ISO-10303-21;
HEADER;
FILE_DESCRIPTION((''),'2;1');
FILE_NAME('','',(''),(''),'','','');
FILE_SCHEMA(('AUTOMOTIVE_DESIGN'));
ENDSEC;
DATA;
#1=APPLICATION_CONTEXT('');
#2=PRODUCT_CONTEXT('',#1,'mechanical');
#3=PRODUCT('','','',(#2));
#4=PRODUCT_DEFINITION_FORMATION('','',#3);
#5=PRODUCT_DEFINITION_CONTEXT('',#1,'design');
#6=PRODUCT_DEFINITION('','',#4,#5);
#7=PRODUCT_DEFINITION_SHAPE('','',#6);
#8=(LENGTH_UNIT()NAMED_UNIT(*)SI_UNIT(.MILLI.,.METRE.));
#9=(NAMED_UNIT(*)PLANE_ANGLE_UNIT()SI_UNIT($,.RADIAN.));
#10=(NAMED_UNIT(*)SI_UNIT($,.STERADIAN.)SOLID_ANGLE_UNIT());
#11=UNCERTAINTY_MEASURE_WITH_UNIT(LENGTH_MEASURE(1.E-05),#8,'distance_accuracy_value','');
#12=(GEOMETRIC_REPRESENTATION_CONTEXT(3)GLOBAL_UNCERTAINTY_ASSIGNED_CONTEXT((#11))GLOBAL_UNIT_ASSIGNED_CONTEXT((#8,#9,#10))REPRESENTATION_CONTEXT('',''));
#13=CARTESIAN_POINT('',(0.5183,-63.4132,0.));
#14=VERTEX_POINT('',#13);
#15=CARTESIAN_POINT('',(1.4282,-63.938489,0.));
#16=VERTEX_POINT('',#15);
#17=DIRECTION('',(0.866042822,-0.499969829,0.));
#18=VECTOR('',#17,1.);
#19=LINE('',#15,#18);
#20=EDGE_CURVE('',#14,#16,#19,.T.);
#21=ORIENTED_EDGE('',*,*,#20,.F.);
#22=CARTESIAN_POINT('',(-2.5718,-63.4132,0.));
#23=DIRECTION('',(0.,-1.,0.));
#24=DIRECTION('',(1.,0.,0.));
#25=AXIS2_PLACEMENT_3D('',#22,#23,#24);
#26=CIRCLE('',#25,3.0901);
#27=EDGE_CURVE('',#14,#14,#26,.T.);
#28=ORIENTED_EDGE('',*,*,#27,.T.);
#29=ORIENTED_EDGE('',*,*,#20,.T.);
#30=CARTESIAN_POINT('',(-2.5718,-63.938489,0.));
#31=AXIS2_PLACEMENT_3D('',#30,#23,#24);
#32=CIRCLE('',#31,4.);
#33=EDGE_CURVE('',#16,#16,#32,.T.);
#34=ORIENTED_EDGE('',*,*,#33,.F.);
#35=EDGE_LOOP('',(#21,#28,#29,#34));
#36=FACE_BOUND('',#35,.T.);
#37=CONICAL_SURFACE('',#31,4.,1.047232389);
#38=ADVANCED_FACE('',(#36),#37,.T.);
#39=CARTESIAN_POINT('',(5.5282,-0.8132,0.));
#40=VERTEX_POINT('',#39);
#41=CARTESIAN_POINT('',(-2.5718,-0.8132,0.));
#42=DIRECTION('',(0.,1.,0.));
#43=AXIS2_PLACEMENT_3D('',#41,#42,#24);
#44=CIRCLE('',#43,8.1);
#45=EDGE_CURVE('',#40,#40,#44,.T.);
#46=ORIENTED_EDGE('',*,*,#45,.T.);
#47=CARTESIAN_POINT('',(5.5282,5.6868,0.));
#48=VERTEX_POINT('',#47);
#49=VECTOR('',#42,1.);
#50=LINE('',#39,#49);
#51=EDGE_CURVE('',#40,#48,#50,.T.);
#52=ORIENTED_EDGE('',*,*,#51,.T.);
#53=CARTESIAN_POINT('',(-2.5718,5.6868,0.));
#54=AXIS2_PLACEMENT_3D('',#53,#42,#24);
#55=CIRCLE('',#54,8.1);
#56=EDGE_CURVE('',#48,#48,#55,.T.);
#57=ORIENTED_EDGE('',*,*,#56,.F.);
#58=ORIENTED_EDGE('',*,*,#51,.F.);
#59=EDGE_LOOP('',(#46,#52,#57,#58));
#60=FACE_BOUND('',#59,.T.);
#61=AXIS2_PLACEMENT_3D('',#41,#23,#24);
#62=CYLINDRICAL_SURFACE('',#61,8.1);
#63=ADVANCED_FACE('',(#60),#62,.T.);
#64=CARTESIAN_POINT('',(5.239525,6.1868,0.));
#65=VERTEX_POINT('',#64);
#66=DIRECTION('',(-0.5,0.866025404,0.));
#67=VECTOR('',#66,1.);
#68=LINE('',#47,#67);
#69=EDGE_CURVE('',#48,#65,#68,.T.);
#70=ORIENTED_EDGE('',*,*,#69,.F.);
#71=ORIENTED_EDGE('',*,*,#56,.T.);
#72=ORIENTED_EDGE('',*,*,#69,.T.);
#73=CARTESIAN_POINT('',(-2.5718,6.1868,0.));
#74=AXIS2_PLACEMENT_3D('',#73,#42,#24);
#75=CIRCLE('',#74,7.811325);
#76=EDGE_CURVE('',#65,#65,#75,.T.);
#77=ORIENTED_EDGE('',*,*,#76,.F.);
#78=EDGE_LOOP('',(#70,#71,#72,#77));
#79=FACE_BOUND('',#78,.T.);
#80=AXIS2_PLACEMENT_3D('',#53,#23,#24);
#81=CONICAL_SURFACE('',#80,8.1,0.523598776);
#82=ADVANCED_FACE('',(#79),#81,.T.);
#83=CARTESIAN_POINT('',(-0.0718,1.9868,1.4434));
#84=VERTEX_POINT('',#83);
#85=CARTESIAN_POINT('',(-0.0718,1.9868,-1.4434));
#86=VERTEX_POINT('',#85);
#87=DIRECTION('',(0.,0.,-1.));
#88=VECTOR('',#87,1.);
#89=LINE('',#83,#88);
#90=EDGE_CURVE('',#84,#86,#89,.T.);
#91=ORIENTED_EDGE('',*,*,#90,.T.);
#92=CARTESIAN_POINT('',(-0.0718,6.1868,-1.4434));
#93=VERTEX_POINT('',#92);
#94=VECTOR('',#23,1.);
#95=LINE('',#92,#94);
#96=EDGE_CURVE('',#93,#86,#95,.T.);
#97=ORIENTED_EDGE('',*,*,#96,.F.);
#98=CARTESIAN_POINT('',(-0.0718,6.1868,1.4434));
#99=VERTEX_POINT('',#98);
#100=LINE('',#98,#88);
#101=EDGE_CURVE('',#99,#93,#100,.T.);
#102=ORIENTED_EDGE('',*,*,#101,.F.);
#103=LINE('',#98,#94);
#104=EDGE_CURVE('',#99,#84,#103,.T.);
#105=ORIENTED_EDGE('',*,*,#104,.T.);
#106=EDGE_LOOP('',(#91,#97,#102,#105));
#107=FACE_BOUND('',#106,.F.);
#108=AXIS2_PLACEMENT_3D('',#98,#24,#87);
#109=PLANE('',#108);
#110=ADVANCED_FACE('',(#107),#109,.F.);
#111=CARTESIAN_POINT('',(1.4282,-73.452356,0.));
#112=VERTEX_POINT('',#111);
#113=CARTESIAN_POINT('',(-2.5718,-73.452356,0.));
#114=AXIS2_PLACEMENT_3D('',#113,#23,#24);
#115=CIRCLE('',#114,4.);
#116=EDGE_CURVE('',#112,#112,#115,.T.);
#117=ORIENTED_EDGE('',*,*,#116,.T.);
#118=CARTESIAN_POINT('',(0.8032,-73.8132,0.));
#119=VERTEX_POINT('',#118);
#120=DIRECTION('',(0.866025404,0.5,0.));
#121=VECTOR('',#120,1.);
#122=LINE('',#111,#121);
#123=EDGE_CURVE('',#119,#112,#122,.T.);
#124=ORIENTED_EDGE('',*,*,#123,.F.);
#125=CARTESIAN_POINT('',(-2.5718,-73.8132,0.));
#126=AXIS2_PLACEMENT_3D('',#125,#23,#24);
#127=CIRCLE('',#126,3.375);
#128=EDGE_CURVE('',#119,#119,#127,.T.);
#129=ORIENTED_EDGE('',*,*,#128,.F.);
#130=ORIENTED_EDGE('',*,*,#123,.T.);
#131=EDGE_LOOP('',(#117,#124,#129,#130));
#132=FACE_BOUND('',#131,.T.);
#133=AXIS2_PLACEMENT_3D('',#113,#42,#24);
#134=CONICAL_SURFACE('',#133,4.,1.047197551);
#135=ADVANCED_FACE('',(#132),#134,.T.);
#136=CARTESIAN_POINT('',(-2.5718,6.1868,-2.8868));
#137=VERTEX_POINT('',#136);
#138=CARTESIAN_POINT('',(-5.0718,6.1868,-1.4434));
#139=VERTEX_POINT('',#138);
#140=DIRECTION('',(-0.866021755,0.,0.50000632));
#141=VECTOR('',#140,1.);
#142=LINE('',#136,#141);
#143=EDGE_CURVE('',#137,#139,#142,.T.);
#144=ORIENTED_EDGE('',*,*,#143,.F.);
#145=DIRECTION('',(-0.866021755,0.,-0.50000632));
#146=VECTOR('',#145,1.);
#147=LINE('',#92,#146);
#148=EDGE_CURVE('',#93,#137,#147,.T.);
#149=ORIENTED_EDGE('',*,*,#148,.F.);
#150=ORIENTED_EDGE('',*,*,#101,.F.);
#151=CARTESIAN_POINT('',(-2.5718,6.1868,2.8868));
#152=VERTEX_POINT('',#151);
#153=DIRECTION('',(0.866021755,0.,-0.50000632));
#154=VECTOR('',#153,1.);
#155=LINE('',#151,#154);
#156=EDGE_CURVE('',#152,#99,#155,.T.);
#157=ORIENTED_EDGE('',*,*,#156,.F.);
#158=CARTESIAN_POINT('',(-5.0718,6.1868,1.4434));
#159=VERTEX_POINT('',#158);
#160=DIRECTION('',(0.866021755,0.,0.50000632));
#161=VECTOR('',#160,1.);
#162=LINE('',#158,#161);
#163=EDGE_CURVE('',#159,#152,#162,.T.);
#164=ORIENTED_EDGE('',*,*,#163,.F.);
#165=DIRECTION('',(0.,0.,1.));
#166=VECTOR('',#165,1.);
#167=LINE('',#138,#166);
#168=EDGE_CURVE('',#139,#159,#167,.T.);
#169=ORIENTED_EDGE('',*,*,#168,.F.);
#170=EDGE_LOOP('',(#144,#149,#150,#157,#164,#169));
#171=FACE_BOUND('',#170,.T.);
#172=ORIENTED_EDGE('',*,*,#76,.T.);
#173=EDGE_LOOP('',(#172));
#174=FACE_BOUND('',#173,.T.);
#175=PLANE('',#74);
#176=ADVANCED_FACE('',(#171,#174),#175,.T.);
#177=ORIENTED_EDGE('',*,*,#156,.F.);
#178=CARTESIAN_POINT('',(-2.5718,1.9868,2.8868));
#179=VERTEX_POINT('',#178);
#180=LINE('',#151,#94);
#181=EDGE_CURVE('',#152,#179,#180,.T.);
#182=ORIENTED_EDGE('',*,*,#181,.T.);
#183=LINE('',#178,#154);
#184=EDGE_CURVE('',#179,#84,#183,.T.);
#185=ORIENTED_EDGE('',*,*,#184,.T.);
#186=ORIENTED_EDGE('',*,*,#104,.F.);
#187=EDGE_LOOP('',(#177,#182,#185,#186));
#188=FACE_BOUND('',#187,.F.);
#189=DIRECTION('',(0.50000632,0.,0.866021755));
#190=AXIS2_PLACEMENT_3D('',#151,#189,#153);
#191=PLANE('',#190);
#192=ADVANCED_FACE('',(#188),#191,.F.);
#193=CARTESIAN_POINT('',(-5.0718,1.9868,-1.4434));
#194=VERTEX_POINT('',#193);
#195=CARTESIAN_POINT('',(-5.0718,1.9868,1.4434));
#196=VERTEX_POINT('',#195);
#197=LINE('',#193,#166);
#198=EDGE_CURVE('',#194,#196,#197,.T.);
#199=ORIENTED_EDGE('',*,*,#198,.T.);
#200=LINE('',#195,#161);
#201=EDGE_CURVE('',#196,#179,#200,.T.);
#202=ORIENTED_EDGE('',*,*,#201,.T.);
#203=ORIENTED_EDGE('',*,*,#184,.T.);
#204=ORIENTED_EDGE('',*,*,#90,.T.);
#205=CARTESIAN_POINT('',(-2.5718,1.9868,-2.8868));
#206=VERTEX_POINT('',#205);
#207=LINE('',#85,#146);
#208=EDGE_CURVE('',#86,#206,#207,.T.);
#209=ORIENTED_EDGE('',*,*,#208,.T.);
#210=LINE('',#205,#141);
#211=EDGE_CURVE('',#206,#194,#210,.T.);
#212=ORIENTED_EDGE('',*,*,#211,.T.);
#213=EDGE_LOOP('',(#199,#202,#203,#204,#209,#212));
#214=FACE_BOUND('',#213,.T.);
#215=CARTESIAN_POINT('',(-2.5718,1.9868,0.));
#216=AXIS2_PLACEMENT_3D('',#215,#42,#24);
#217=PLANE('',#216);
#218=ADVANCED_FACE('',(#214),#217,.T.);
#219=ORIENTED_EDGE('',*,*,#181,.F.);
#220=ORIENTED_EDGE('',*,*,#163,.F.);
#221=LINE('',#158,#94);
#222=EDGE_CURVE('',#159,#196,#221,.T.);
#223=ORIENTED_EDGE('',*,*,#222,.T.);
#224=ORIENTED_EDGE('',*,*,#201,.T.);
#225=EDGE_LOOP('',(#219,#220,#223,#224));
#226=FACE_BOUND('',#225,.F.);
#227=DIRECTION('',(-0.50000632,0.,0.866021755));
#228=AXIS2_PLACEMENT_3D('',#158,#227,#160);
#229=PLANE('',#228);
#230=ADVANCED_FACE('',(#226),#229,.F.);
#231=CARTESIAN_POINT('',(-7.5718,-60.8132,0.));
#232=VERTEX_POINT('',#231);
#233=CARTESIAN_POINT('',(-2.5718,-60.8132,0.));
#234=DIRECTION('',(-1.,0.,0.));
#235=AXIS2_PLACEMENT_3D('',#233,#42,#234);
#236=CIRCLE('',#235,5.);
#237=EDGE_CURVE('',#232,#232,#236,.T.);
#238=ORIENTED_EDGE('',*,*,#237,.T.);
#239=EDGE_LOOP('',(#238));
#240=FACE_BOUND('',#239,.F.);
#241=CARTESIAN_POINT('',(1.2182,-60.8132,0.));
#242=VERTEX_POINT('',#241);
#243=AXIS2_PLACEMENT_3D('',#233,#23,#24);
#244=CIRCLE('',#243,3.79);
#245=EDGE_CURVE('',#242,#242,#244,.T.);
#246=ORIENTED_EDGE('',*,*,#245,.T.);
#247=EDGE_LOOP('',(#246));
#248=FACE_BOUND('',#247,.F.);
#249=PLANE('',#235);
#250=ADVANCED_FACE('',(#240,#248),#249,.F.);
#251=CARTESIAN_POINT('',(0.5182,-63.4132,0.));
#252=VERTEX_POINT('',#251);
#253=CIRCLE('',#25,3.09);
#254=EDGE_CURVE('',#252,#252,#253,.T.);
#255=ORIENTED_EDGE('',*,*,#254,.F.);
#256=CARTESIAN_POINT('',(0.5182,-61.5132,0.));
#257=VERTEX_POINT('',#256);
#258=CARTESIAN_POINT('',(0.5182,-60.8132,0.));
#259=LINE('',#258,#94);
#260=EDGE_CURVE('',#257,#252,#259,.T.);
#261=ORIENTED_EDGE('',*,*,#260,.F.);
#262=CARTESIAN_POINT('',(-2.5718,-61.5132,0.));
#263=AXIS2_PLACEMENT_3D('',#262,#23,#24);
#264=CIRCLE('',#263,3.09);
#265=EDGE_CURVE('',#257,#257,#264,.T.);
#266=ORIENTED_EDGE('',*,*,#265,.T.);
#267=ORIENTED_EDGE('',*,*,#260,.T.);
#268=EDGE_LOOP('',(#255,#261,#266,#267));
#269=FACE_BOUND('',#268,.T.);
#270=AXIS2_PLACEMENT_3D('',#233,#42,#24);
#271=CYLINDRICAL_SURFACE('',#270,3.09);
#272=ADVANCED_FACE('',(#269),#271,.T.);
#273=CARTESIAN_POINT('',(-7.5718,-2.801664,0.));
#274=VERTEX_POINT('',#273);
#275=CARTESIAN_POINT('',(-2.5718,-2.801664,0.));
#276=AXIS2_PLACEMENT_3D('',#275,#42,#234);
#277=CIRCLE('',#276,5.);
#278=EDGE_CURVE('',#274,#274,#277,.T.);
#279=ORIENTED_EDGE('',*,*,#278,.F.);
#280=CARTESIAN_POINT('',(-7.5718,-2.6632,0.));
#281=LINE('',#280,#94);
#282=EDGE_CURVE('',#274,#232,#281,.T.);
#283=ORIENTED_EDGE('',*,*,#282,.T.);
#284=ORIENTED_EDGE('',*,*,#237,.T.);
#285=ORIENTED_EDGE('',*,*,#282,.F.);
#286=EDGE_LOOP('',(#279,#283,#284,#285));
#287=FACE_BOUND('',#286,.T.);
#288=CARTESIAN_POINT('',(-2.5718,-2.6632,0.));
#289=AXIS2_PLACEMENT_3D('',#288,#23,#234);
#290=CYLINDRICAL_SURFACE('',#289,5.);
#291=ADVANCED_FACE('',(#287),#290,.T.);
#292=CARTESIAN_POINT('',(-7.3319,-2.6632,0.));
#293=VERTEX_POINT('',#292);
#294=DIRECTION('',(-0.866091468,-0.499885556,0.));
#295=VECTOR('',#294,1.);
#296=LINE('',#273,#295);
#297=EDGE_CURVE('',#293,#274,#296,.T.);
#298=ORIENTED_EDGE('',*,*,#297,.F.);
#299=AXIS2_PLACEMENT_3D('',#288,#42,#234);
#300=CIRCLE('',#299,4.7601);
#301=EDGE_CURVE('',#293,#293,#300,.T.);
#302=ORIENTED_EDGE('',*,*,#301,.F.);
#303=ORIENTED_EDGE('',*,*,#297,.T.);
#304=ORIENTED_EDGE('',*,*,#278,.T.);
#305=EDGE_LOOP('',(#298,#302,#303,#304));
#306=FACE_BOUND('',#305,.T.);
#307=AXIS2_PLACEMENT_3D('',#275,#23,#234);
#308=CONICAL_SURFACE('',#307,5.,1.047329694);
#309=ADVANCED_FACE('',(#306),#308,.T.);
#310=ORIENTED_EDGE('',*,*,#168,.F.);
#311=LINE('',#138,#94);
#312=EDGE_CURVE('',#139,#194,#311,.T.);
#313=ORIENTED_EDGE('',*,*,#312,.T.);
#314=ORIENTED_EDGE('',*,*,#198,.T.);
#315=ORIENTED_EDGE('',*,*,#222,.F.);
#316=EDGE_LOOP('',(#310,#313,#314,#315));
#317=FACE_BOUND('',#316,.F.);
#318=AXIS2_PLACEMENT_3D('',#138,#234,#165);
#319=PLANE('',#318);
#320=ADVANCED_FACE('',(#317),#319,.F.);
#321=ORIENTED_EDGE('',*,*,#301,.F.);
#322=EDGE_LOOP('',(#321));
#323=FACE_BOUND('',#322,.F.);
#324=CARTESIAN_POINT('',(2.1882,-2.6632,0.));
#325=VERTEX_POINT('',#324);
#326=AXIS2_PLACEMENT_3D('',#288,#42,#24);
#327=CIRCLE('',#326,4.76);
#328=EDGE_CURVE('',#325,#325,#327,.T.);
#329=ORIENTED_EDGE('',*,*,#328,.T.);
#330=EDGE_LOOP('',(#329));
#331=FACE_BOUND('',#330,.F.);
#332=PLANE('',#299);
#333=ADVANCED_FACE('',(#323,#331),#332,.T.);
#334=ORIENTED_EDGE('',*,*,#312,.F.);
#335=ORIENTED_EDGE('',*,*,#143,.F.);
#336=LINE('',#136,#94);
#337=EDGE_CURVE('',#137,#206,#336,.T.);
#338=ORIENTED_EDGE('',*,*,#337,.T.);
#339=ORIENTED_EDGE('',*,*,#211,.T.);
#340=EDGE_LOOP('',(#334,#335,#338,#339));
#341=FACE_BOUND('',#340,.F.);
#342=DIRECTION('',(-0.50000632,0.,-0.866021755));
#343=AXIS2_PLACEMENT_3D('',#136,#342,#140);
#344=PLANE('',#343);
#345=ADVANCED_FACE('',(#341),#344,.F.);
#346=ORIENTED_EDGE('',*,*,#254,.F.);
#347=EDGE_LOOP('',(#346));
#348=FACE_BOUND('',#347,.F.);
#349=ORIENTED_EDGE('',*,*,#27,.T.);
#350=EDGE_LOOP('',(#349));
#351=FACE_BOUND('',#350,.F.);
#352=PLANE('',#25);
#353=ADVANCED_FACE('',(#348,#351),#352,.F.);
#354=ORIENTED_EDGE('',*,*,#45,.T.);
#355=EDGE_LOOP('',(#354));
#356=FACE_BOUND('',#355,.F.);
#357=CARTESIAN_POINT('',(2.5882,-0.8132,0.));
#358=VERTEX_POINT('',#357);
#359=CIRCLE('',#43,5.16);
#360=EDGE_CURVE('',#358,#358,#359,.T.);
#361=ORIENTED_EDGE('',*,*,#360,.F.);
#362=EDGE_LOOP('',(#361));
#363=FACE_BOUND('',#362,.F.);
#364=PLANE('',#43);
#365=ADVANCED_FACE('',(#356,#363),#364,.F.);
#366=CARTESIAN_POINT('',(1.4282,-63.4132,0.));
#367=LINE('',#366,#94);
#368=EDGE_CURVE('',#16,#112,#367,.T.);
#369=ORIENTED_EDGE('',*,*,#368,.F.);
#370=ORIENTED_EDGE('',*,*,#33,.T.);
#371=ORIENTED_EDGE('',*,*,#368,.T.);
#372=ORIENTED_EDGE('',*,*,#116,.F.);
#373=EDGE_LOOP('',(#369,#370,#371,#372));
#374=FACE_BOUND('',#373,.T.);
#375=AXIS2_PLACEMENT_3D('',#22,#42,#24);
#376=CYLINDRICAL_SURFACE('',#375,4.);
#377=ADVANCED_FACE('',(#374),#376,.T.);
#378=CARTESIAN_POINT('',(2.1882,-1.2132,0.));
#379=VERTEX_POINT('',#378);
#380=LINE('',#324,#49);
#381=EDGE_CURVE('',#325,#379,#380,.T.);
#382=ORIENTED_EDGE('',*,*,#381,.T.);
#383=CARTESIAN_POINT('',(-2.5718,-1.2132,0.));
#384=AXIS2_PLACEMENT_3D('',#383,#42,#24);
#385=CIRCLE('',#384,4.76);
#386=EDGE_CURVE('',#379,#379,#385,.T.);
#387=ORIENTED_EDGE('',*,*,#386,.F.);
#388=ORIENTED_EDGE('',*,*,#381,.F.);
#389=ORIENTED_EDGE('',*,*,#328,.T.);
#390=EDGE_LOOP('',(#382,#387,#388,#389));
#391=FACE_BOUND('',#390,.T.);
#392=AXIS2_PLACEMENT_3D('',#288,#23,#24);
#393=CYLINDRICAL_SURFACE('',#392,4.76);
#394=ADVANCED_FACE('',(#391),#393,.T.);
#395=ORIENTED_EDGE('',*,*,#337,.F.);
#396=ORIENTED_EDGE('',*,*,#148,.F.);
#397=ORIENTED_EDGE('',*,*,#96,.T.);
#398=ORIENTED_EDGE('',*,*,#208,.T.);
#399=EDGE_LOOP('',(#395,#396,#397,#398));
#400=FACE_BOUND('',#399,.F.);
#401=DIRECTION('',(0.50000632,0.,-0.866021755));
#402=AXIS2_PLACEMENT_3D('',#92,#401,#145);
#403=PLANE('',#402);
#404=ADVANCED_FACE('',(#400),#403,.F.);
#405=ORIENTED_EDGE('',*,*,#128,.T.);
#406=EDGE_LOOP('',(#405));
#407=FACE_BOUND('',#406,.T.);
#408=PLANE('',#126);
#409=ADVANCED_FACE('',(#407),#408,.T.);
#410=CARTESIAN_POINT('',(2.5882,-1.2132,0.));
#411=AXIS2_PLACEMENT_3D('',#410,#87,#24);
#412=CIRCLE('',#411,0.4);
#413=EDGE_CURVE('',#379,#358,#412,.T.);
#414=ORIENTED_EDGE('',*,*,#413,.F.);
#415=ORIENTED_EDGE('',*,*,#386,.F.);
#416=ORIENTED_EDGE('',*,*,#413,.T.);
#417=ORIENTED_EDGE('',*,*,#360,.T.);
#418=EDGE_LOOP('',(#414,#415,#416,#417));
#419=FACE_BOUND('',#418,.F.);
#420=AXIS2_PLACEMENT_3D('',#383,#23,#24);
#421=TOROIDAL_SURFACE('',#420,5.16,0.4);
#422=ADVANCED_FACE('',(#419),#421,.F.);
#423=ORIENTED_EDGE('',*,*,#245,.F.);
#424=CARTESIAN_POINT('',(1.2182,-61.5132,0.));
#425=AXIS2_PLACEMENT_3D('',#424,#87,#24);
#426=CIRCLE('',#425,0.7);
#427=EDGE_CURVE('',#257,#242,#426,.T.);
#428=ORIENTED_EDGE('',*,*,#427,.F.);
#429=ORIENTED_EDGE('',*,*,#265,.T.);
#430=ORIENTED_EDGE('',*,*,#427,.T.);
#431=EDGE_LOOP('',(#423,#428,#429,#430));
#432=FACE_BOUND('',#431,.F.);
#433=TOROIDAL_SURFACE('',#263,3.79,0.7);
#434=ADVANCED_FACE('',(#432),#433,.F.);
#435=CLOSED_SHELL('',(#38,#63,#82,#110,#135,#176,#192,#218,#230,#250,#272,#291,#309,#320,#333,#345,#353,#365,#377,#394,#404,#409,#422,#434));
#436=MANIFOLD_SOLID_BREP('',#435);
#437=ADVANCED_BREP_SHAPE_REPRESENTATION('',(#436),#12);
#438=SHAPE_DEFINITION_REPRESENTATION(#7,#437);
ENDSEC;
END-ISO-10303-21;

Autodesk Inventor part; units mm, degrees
ref_plane "YZ Plane" through (0, 0, 0) normal (1, 0, 0) x (0, 1, 0)
ref_plane "XZ Plane" through (0, 0, 0) normal (0, 1, 0) x (-1, 0, 0)
ref_plane "XY Plane" through (0, 0, 0) normal (0, 0, 1) x (1, 0, 0)
sketch "Sketch1" plane through (0, 0, 0) normal (0, 0, 1) x (1, 0, 0)
  line L0 (-2.5718, -2.6632) -> (-7.5718, -2.6632)
  line L1 (-7.5718, -2.6632) -> (-7.5718, -60.8132)
  line L2 (-7.5718, -60.8132) -> (-2.5718, -60.8132)
  line L3 (-2.5718, -60.8132) -> (-2.5718, -2.6632)
  dimension "d1" = 58.15
  dimension "d2" = 5
revolve "Shoulder" add sketch "Sketch1" angle 360 about axis through (-2.5718, -60.8132, 0) along (0, 1, 0)
sketch "Sketch2" plane through (-2.5718, -2.6632, 0) normal (0, 1, 0) x (1, 0, 0)
  circle A0 centre (0, 0) radius 5 projected
  circle A1 centre (0, 0) radius 4.76
  dimension "d3" = 9.52
extrude "Shoulder_neck" add sketch "Sketch2" along normal blind 1.85 contours A1
sketch "Sketch3" plane through (-2.5718, -0.8132, 0) normal (0, 1, 0) x (1, 0, 0)
  circle A0 centre (0, 0) radius 4.76 projected
  circle A1 centre (0, 0) radius 8.1
  dimension "d6" = 16.2
extrude "Head" add sketch "Sketch3" along normal blind 7 contours A0 | A1
sketch "Sketch4" plane through (-2.5718, -60.8132, 0) normal (0, -1, 0) x (1, 0, 0)
  circle A0 centre (0, 0) radius 5 projected
  circle A1 centre (0, 0) radius 3.09
  dimension "d9" = 6.18
extrude "Thread_neck" add sketch "Sketch4" along normal blind 2.6 contours A1
sketch "Sketch5" plane through (-2.5718, -63.4132, 0) normal (0, -1, 0) x (1, 0, 0)
  circle A0 centre (0, 0) radius 3.09 projected
  circle A1 centre (0, 0) radius 4
  dimension "d12" = 8
extrude "Thread_shoulder" add sketch "Sketch5" along normal blind 10.4 contours A0 | A1
sketch "Sketch6" plane through (-2.5718, 6.1868, 0) normal (0, 1, 0) x (1, 0, 0)
  circle A0 centre (0, 0) radius 8.1 projected
  circle A1 centre (0, 0) radius 2.5 construction
  line L0 (-2.5, 1.4434) -> (-2.5, -1.4434)
  line L1 (-2.5, -1.4434) -> (0, -2.8868)
  line L2 (0, -2.8868) -> (2.5, -1.4434)
  line L3 (2.5, -1.4434) -> (2.5, 1.4434)
  line L4 (2.5, 1.4434) -> (0, 2.8868)
  line L5 (0, 2.8868) -> (-2.5, 1.4434)
  dimension "d15" = 5
extrude "Hex" cut sketch "Sketch6" against normal blind 4.2 contours L5 L4 L3 L2 L1 L0
chamfer "Chamfer1" distance 0.24 angle 30 1 edges at (2.4282, -2.6632, 0) measured on face at (-7.3973, -2.6632, -0.7786)
fillet "Fillet1" radius 0.4 1 edges at (-7.3318, -0.8132, 0)
chamfer "Chamfer2" distance 0.5 angle 30 1 edges at (-10.6718, 6.1868, 0) measured on face at (5.4233, 3.8535, 1.2993)
chamfer "Chamfer3" distance 0.625 angle 30 1 edges at (-6.5718, -73.8132, 0) measured on face at (-1.8144, -73.8132, 1.0973)
fillet "Fillet2" radius 0.7 1 edges at (-5.6618, -60.8132, 0)
chamfer "Chamfer7" distance 0.91 angle 30 1 edges at (-6.5718, -63.4132, 0) measured on face at (1.0861, -63.4132, -0.3191)
thread "Thread" size "M8x1.25" class "6g" standard "ANSI Metric M Profile" full length
equation "\"d1\" = Shoulder_length - Shoulder_neck_length"
equation "\"d2\" = 0.5 * Shoulder_diameter"
equation "\"d3\" = Shoulder_neck_dia"
equation "\"d4\" = Shoulder_neck_length"
equation "\"d6\" = Head_diameter"
equation "\"d7\" = Head_height"
equation "\"d9\" = Thread_neck_dia"
equation "\"d10\" = Thread_neck_length"
equation "\"d12\" = Thread_diameter"
equation "\"d13\" = Thread_length - Thread_neck_length"
equation "\"d15\" = Hex_size"
equation "\"d16\" = Hex_length"
equation "\"d18\" = -0.5 * Shoulder_neck_dia + 0.5 * Shoulder_diameter"
equation "\"d64\" = -0.5 * Shoulder_neck_dia + 0.5 * Shoulder_diameter"
equation "\"d21\" = 0.1 * Hex_size"
equation "\"d65\" = 0.1 * Hex_size"
equation "\"d23\" = 0.5 * Thread_pitch"
equation "\"d66\" = 0.5 * Thread_pitch"
equation "\"d25\" = Thread_neck_radius"
equation "\"d60\" = -0.5 * Thread_neck_dia + 0.5 * Thread_diameter"
equation "\"d67\" = -0.5 * Thread_neck_dia + 0.5 * Thread_diameter"
equation "\"Shoulder_length\" = 60"
equation "\"Shoulder_neck_dia\" = 9.52"
equation "\"Thread_diameter\" = 8"
equation "\"Thread_length\" = 13"
equation "\"Head_diameter\" = 16.2"
equation "\"Head_height\" = 7"
equation "\"Thread_neck_dia\" = 6.18"
equation "\"Hex_size\" = 5"
equation "\"Hex_length\" = 4.2"
equation "\"Thread_pitch\" = 1.25"
equation "\"Shoulder_neck_length\" = 1.85"
equation "\"Thread_neck_length\" = 2.6"
equation "\"Thread_neck_radius\" = 0.7"
equation "\"Shoulder_diameter\" = 10"
properties part number "SCREW, SHOULDER, P, 12.9, 10X60" material "Steel, High Strength Low Alloy"
